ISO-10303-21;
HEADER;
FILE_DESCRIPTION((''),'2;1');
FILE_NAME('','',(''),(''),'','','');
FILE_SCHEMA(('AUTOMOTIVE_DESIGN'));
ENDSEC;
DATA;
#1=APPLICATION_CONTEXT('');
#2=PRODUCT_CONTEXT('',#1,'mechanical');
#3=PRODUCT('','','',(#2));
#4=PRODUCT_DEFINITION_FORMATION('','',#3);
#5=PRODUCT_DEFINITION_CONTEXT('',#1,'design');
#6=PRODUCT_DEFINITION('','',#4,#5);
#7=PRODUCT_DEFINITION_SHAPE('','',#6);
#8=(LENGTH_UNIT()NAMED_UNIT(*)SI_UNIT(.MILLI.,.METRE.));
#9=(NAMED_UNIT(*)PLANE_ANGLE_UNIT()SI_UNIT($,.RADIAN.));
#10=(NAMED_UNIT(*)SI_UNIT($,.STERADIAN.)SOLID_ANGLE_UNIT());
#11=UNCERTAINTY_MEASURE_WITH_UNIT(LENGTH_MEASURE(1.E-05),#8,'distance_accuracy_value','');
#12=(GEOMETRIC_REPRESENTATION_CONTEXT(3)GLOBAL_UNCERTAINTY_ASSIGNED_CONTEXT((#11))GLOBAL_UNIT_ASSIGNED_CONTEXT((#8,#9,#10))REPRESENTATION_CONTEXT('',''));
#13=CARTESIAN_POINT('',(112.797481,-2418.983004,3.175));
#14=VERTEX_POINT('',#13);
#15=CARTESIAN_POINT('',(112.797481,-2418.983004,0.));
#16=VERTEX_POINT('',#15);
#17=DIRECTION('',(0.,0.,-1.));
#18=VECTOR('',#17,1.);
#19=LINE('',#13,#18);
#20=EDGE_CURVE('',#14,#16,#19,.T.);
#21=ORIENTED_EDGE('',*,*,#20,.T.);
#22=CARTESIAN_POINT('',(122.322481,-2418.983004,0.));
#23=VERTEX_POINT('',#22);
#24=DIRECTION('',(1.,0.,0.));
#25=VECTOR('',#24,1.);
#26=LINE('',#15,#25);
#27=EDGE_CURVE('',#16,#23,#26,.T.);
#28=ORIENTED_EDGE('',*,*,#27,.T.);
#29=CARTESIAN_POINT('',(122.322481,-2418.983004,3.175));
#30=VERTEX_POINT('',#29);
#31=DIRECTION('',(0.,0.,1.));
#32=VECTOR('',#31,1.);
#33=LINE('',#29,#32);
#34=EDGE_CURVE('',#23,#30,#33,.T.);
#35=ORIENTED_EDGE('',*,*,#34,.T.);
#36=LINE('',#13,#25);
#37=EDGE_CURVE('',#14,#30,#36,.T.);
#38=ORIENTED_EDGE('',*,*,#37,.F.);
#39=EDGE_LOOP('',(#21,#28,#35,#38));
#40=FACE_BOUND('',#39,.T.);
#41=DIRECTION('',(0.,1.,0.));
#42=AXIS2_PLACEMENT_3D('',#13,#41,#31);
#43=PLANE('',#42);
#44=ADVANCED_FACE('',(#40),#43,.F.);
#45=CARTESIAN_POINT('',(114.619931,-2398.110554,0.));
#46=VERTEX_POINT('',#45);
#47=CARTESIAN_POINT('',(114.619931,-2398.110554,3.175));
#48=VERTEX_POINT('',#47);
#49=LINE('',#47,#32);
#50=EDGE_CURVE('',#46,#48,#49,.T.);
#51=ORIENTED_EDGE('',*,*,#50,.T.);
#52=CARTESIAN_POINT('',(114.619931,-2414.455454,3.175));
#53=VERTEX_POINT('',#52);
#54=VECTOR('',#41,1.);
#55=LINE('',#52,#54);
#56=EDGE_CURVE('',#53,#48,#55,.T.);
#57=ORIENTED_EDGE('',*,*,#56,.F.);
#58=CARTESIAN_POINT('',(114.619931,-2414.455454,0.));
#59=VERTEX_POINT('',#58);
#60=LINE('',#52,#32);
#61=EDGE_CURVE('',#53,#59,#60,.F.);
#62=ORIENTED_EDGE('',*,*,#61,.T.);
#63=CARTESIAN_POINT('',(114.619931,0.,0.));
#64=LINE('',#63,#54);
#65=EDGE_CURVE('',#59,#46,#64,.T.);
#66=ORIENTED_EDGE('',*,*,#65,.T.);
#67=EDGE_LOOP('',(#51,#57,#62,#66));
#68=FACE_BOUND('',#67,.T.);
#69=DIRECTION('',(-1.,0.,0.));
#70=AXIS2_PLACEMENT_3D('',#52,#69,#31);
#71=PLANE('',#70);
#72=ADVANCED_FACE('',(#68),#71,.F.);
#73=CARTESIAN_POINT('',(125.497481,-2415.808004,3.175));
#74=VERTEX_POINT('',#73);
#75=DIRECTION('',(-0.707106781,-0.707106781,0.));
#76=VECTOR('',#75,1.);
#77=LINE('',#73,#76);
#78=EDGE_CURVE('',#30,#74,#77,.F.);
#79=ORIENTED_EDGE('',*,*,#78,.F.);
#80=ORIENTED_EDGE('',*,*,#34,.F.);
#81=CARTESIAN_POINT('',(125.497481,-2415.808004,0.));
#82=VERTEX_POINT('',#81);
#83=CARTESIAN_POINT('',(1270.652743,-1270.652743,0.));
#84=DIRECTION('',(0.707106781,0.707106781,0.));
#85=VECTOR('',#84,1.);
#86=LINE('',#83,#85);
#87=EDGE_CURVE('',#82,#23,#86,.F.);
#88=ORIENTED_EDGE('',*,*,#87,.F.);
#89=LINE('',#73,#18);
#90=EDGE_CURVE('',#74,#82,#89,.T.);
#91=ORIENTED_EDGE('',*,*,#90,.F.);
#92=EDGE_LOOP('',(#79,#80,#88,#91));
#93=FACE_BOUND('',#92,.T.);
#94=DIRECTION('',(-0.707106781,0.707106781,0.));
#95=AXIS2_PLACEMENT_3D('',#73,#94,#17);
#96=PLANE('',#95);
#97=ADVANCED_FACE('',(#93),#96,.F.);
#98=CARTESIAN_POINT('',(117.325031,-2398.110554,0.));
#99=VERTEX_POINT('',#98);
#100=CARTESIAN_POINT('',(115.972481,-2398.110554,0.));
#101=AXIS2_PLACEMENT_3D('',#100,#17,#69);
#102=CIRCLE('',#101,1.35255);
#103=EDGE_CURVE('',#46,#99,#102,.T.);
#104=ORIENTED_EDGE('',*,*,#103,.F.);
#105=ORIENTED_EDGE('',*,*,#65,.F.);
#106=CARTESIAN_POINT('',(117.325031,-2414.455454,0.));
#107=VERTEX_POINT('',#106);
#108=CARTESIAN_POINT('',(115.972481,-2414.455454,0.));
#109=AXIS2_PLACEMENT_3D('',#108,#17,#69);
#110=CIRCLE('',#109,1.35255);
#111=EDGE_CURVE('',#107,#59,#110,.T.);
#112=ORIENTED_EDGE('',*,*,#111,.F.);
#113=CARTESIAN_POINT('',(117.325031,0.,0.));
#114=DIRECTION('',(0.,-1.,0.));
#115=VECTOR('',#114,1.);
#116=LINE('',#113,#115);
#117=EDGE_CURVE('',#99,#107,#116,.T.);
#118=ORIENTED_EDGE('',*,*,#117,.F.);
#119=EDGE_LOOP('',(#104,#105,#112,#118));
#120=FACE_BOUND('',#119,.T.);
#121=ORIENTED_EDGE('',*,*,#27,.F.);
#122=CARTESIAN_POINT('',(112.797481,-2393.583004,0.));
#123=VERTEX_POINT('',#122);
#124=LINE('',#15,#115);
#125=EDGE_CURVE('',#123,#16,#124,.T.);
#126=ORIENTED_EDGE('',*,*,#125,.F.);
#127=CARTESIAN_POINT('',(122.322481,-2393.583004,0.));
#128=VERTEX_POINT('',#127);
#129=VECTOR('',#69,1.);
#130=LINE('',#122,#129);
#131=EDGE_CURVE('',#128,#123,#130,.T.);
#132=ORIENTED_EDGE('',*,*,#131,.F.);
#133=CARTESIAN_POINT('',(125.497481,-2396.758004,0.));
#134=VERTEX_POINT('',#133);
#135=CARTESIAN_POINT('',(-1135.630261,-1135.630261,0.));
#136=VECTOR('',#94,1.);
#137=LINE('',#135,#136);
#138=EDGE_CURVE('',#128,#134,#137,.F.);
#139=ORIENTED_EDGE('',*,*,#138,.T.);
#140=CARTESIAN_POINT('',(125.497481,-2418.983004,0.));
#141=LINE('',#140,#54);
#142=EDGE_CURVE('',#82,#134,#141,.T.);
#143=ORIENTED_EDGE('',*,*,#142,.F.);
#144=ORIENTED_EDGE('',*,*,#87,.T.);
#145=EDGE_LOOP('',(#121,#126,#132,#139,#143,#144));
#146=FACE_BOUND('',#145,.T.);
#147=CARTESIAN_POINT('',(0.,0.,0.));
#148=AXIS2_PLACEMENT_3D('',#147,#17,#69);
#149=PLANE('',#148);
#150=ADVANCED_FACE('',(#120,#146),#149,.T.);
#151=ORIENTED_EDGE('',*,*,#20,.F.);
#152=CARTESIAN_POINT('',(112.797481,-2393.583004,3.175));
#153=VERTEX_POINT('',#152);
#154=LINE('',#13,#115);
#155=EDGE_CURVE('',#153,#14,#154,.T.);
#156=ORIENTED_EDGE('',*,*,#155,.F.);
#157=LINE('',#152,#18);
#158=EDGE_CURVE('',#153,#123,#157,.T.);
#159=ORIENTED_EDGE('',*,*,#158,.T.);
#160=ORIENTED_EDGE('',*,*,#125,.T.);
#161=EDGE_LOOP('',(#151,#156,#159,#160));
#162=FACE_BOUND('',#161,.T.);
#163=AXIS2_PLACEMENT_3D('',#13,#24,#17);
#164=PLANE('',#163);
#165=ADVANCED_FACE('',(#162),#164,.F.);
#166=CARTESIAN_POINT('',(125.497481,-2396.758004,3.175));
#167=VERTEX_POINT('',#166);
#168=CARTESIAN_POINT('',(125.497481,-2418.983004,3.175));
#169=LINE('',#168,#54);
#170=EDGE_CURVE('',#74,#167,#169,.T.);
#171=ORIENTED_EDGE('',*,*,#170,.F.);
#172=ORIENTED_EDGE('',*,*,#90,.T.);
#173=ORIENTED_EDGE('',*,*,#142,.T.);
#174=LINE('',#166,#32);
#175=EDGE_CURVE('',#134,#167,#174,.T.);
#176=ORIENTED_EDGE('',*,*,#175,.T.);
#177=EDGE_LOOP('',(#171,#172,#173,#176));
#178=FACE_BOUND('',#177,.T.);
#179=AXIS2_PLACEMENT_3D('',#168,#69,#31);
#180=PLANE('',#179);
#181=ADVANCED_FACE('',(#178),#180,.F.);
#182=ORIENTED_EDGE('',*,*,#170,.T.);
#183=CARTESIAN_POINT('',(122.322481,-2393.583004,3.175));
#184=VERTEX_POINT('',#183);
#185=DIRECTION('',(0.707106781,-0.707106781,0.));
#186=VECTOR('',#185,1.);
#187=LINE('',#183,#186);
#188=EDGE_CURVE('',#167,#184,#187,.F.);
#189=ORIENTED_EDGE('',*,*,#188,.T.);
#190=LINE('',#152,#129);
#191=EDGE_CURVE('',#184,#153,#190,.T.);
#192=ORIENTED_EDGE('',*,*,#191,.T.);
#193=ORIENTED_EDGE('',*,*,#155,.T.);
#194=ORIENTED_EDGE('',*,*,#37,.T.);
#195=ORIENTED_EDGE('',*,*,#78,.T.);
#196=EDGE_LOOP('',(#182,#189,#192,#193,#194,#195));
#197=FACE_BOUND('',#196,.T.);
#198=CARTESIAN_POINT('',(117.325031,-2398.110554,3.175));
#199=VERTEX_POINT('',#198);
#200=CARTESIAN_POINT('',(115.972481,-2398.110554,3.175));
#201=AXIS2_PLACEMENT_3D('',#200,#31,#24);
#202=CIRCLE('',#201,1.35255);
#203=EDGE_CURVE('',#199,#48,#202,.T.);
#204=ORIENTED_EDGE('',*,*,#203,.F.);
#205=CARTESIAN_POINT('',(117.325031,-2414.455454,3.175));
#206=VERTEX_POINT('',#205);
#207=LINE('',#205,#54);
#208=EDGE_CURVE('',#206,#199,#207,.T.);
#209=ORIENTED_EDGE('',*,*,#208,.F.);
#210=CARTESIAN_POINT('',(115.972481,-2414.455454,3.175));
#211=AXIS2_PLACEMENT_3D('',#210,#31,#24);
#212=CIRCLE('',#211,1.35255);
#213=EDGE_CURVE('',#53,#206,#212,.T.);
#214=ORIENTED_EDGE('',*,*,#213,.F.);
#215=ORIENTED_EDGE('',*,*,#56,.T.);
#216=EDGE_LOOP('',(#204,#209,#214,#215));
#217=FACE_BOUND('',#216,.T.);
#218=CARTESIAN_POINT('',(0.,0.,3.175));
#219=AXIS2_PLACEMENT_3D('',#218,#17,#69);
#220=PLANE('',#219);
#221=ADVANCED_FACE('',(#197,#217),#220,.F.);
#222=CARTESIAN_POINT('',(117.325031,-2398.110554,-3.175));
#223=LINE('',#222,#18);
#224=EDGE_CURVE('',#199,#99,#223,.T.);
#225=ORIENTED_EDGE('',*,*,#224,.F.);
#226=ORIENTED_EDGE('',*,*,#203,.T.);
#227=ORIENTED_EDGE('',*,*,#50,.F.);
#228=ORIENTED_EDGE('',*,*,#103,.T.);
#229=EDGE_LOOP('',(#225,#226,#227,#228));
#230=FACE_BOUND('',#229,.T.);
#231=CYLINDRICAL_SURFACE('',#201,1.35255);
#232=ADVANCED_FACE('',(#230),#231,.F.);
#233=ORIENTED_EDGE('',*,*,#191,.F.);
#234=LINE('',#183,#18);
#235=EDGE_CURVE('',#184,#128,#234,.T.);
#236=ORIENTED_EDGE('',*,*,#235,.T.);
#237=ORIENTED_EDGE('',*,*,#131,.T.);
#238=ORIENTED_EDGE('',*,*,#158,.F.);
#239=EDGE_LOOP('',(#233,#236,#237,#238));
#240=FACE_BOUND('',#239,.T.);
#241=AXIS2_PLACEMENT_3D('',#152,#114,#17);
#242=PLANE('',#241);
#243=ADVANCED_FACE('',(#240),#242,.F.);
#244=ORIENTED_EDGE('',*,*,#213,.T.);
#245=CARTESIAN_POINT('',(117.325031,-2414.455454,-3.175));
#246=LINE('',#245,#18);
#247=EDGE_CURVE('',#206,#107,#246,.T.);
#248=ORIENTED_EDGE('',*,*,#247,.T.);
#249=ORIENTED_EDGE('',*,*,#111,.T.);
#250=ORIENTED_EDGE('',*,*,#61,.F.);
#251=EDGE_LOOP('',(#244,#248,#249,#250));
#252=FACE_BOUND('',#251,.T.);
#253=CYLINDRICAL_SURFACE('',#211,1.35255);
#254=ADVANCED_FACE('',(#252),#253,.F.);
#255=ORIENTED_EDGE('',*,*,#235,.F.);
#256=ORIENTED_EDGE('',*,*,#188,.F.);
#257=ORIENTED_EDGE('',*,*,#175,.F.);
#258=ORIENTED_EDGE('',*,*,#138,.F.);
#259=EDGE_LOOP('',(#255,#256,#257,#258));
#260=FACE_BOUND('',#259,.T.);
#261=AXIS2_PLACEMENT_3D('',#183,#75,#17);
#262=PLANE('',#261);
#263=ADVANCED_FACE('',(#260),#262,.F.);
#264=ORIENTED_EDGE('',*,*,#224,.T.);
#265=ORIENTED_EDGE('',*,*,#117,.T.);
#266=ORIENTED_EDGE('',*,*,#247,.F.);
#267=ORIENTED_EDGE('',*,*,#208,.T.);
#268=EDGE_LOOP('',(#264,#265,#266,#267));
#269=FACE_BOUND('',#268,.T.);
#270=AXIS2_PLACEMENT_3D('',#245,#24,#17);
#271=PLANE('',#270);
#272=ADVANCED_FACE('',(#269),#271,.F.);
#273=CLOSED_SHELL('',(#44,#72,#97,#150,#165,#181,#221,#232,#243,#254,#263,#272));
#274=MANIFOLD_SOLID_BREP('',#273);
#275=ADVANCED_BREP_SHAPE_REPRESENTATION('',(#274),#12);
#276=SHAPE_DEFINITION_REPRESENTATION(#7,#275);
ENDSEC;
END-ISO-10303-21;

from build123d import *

# Parameters (mm, degrees)
SKETCH1_W                 = 12.7
SKETCH1_H                 = 25.4
BOSS_EXTRUDE1_DEPTH       = 3.175
CHAMFER1_SIZE             = 3.175
F_2_CLEARANCE_SLOT1_DEPTH = 3.175


# Read off the part's stored shape, not the designer's step: #2 Clearance Slot1
with BuildPart() as part:
    # Sketch1 → Boss-Extrude1 (new body)
    with BuildSketch(Plane.XY):
        with Locations((119.14748118, -2406.283004154)):
            Rectangle(SKETCH1_W, SKETCH1_H)
    extrude(amount=BOSS_EXTRUDE1_DEPTH)

    # Chamfer1
    chamfer1_edges = [part.edges().sort_by_distance(p)[0] for p in [
        (125.49748118, -2393.583004154, 1.5875),
        (125.49748118, -2418.983004154, 1.5875),
    ]]
    chamfer(chamfer1_edges, length=CHAMFER1_SIZE)

    # #2 Clearance Slot1 outline → #2 Clearance Slot1 (cut)
    with BuildSketch(Plane.XY):
        with BuildLine():
            Line((117.32503118, -2414.455454154), (117.32503118, -2398.110554154))
            ThreePointArc((117.32503118, -2398.110554154), (115.97248118, -2396.758004154), (114.61993118, -2398.110554154))
            Line((114.61993118, -2398.110554154), (114.61993118, -2414.455454154))
            ThreePointArc((114.61993118, -2414.455454154), (115.97248118, -2415.808004154), (117.32503118, -2414.455454154))
        make_face()
    extrude(amount=F_2_CLEARANCE_SLOT1_DEPTH, mode=Mode.SUBTRACT)


solid = part.part
